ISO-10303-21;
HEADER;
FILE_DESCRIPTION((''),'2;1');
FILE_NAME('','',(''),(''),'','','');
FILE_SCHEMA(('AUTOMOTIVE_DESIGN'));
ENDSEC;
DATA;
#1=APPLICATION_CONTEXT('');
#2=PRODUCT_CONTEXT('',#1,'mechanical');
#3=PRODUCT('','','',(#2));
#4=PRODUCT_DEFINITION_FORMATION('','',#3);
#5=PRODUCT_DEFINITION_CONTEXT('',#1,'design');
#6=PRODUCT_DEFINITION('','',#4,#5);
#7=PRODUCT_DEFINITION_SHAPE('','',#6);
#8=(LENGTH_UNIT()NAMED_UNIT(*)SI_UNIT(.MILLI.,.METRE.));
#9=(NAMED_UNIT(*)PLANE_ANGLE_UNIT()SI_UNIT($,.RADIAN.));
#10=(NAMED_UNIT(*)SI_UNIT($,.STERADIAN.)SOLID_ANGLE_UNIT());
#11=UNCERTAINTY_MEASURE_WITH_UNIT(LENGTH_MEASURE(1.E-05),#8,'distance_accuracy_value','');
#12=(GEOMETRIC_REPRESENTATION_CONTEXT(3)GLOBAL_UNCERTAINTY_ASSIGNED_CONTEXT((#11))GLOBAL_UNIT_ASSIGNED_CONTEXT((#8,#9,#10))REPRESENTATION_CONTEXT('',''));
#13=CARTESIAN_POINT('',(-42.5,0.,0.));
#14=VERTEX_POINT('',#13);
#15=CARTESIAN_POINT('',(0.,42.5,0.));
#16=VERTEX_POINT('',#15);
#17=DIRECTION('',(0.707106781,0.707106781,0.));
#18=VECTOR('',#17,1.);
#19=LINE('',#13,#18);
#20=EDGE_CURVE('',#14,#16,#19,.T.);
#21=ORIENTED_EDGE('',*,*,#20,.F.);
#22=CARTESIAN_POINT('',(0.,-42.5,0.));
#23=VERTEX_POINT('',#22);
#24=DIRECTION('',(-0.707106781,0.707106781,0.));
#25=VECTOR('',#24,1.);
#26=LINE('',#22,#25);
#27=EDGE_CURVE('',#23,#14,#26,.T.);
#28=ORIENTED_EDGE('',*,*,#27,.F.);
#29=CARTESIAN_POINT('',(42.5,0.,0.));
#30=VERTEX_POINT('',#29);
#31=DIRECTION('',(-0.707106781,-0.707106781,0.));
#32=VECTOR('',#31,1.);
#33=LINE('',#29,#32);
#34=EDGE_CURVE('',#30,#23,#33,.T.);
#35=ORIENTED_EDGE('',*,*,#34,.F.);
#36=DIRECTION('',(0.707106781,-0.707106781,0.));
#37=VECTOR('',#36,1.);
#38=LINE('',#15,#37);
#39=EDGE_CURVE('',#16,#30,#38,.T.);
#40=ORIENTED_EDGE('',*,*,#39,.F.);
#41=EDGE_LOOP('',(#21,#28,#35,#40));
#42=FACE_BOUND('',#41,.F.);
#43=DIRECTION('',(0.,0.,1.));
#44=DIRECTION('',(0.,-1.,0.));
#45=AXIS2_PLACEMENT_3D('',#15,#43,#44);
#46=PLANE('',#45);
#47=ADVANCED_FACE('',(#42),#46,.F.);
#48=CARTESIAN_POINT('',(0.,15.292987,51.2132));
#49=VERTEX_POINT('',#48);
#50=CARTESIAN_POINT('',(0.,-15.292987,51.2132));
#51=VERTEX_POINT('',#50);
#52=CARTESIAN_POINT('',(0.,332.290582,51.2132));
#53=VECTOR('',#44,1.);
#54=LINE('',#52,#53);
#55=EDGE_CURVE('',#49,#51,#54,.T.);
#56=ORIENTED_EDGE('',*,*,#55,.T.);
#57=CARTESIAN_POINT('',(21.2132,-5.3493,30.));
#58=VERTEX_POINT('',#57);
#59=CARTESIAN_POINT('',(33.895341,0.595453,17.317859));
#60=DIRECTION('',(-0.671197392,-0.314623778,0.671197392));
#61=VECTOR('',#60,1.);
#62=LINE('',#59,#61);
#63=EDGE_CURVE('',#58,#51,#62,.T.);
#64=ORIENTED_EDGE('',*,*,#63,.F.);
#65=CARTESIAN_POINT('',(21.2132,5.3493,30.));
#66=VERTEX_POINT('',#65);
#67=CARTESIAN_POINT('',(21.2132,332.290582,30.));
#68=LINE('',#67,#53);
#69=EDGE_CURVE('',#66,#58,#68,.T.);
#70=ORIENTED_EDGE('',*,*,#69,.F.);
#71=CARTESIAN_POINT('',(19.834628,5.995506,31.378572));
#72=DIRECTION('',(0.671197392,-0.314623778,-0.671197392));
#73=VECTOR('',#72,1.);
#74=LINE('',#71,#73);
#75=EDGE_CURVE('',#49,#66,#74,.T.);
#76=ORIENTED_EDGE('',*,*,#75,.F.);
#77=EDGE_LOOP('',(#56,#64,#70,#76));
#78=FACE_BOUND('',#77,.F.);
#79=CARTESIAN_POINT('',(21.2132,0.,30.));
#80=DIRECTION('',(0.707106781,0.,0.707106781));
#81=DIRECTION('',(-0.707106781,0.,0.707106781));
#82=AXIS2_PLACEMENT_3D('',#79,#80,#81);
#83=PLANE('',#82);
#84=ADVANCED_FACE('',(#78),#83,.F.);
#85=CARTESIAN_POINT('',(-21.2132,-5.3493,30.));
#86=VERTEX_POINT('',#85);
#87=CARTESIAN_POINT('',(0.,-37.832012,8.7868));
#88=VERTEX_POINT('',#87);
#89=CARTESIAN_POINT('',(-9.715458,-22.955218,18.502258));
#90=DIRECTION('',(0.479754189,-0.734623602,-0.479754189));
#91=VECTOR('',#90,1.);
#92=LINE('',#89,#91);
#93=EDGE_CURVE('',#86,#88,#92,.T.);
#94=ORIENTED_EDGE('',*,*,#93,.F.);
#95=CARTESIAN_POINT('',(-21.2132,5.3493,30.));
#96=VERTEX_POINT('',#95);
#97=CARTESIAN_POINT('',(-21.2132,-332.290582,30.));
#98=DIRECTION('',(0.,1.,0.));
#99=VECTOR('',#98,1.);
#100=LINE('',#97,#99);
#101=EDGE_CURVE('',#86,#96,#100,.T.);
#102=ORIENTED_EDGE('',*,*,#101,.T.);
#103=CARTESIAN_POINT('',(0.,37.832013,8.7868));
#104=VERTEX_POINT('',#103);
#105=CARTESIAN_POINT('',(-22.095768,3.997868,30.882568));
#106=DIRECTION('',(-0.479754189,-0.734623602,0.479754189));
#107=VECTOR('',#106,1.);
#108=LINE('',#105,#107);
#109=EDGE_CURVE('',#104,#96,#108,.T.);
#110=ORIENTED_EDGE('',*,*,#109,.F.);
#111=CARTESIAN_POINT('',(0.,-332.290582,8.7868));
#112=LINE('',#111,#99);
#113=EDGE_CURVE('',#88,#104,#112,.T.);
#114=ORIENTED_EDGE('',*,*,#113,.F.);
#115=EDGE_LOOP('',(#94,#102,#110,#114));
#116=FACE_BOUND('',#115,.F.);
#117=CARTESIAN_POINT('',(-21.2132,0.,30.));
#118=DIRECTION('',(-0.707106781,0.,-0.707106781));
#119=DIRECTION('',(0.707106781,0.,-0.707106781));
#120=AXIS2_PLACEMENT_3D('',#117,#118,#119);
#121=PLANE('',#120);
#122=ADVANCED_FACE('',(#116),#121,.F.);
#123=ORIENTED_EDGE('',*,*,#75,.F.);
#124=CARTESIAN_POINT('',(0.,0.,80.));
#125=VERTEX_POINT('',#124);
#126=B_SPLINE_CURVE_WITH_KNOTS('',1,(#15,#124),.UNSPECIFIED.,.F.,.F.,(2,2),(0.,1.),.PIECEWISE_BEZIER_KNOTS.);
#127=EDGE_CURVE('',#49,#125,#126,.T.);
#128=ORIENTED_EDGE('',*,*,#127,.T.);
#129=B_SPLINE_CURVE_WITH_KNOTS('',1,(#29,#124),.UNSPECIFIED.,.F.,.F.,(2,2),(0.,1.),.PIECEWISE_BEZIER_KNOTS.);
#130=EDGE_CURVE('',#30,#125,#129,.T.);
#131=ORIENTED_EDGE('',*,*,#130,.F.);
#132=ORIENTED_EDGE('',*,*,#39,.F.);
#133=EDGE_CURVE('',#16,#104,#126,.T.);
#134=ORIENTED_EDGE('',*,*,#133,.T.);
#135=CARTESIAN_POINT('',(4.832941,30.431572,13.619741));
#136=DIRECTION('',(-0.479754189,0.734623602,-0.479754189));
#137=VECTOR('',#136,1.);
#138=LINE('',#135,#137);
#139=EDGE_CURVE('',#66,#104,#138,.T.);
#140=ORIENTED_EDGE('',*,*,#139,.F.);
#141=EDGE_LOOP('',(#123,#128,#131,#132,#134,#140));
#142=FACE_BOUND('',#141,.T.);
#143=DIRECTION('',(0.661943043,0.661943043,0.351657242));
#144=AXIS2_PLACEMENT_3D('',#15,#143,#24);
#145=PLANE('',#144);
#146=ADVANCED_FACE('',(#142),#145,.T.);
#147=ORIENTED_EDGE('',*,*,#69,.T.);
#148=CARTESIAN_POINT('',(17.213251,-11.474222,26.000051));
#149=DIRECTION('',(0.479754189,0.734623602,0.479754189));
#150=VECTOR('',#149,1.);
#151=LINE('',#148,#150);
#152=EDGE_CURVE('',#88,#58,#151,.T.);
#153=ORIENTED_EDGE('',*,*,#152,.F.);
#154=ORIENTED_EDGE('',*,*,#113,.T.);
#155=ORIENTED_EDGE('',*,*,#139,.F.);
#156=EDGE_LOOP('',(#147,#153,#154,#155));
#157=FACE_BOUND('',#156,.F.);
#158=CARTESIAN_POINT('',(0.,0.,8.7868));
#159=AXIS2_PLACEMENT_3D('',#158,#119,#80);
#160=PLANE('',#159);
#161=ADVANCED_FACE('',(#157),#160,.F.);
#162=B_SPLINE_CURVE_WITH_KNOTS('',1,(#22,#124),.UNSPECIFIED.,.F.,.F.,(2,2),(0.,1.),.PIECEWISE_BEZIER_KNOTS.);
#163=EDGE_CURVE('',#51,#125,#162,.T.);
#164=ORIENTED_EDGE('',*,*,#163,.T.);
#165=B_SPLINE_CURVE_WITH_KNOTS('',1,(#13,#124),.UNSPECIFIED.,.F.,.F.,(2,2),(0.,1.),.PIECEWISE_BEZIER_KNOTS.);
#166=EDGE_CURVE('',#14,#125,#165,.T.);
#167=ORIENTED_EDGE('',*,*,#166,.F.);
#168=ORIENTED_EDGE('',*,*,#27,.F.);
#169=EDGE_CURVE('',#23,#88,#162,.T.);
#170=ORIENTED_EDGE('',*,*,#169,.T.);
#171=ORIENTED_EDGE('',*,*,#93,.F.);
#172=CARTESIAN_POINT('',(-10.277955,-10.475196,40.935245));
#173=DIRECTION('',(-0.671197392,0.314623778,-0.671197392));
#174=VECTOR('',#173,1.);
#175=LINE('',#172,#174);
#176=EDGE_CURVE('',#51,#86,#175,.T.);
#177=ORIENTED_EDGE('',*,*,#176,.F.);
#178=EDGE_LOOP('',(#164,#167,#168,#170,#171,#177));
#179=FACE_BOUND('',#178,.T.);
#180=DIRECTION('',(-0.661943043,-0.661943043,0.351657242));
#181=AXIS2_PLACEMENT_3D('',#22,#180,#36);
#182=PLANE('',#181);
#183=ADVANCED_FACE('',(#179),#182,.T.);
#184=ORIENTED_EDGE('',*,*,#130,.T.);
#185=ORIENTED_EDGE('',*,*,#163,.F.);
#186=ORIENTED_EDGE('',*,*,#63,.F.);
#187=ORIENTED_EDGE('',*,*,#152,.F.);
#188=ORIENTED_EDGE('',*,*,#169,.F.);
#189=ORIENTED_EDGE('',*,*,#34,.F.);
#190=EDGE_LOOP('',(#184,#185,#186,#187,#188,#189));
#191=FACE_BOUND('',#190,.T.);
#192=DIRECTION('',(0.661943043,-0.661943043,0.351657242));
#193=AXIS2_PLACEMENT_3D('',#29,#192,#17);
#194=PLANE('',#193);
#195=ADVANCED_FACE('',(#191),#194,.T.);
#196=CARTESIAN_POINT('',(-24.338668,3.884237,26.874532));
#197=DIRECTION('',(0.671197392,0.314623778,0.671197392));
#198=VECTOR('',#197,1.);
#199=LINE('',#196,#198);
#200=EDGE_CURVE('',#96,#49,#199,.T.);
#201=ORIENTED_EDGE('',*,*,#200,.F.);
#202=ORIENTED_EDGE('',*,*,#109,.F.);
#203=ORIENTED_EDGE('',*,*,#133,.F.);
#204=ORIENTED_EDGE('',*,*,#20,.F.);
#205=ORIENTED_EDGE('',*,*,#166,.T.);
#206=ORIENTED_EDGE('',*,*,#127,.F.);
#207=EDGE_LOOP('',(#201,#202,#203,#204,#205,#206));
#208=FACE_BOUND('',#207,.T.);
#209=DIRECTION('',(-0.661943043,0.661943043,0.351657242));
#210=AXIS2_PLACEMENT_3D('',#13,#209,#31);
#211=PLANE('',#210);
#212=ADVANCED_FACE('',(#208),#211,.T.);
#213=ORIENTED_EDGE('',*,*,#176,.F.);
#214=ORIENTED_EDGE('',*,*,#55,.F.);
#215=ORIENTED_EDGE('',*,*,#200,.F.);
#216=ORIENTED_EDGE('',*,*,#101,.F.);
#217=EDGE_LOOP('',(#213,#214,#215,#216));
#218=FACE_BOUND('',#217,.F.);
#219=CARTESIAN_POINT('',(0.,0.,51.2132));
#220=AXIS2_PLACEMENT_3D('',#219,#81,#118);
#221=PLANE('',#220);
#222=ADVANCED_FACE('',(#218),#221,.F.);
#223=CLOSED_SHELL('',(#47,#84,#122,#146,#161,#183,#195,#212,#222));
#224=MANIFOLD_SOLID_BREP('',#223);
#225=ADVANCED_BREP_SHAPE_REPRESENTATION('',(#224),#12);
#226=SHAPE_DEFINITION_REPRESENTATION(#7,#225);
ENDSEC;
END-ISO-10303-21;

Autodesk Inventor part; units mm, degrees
ref_plane "YZ Plane" through (0, 0, 0) normal (1, 0, 0) x (0, 1, 0)
ref_plane "XZ Plane" through (0, 0, 0) normal (0, 1, 0) x (-1, 0, 0)
sketch "Эскиз1" plane through (0, 0, 0) normal (0, 0, 1) x (1, 0, 0)
  point P0 (0, 0)
sketch "Эскиз2" plane through (0, 0, 0) normal (0, 0, 1) x (1, 0, 0)
  line L0 (0, 42.5) -> (42.5, 0)
  line L1 (42.5, 0) -> (0, -42.5)
  line L2 (0, -42.5) -> (-42.5, 0)
  line L3 (-42.5, 0) -> (0, 42.5)
  point P0 (0, 0)
  point P1 (0, 0)
  dimension "d0" = 85
sketch "Эскиз3" plane through (0, 0, 0) normal (0, 0, 1) x (1, 0, 0)
  point P0 (0, 0)
ref_plane "РабПлоскость1" through (0, 0, 80) normal (0, 0, 1) x (1, 0, 0)
sketch "Эскиз4" plane through (0, 0, 80) normal (0, 0, 1) x (1, 0, 0)
  point P0 (0, 0)
loft "Лофт1" add profiles "Эскиз2" section 2 point at (0, 0, 80)
sketch "Эскиз5" plane through (0, 0, 0) normal (0, 1, 0) x (-1, 0, 0)
  line L0 (0, 8.7868) -> (-21.2132, 30)
  line L1 (-21.2132, 30) -> (0, 51.2132)
  line L2 (0, 51.2132) -> (21.2132, 30)
  line L3 (21.2132, 30) -> (0, 8.7868)
  line L4 (0, 0) -> (42.5, 0) projected
  point P0 (0, 30)
  dimension "d6" = 30
  dimension "d7" = 30
extrude "Выдавливание1" cut sketch "Эскиз5" along normal through all both and the other way through all
properties part number "Пирамида"
